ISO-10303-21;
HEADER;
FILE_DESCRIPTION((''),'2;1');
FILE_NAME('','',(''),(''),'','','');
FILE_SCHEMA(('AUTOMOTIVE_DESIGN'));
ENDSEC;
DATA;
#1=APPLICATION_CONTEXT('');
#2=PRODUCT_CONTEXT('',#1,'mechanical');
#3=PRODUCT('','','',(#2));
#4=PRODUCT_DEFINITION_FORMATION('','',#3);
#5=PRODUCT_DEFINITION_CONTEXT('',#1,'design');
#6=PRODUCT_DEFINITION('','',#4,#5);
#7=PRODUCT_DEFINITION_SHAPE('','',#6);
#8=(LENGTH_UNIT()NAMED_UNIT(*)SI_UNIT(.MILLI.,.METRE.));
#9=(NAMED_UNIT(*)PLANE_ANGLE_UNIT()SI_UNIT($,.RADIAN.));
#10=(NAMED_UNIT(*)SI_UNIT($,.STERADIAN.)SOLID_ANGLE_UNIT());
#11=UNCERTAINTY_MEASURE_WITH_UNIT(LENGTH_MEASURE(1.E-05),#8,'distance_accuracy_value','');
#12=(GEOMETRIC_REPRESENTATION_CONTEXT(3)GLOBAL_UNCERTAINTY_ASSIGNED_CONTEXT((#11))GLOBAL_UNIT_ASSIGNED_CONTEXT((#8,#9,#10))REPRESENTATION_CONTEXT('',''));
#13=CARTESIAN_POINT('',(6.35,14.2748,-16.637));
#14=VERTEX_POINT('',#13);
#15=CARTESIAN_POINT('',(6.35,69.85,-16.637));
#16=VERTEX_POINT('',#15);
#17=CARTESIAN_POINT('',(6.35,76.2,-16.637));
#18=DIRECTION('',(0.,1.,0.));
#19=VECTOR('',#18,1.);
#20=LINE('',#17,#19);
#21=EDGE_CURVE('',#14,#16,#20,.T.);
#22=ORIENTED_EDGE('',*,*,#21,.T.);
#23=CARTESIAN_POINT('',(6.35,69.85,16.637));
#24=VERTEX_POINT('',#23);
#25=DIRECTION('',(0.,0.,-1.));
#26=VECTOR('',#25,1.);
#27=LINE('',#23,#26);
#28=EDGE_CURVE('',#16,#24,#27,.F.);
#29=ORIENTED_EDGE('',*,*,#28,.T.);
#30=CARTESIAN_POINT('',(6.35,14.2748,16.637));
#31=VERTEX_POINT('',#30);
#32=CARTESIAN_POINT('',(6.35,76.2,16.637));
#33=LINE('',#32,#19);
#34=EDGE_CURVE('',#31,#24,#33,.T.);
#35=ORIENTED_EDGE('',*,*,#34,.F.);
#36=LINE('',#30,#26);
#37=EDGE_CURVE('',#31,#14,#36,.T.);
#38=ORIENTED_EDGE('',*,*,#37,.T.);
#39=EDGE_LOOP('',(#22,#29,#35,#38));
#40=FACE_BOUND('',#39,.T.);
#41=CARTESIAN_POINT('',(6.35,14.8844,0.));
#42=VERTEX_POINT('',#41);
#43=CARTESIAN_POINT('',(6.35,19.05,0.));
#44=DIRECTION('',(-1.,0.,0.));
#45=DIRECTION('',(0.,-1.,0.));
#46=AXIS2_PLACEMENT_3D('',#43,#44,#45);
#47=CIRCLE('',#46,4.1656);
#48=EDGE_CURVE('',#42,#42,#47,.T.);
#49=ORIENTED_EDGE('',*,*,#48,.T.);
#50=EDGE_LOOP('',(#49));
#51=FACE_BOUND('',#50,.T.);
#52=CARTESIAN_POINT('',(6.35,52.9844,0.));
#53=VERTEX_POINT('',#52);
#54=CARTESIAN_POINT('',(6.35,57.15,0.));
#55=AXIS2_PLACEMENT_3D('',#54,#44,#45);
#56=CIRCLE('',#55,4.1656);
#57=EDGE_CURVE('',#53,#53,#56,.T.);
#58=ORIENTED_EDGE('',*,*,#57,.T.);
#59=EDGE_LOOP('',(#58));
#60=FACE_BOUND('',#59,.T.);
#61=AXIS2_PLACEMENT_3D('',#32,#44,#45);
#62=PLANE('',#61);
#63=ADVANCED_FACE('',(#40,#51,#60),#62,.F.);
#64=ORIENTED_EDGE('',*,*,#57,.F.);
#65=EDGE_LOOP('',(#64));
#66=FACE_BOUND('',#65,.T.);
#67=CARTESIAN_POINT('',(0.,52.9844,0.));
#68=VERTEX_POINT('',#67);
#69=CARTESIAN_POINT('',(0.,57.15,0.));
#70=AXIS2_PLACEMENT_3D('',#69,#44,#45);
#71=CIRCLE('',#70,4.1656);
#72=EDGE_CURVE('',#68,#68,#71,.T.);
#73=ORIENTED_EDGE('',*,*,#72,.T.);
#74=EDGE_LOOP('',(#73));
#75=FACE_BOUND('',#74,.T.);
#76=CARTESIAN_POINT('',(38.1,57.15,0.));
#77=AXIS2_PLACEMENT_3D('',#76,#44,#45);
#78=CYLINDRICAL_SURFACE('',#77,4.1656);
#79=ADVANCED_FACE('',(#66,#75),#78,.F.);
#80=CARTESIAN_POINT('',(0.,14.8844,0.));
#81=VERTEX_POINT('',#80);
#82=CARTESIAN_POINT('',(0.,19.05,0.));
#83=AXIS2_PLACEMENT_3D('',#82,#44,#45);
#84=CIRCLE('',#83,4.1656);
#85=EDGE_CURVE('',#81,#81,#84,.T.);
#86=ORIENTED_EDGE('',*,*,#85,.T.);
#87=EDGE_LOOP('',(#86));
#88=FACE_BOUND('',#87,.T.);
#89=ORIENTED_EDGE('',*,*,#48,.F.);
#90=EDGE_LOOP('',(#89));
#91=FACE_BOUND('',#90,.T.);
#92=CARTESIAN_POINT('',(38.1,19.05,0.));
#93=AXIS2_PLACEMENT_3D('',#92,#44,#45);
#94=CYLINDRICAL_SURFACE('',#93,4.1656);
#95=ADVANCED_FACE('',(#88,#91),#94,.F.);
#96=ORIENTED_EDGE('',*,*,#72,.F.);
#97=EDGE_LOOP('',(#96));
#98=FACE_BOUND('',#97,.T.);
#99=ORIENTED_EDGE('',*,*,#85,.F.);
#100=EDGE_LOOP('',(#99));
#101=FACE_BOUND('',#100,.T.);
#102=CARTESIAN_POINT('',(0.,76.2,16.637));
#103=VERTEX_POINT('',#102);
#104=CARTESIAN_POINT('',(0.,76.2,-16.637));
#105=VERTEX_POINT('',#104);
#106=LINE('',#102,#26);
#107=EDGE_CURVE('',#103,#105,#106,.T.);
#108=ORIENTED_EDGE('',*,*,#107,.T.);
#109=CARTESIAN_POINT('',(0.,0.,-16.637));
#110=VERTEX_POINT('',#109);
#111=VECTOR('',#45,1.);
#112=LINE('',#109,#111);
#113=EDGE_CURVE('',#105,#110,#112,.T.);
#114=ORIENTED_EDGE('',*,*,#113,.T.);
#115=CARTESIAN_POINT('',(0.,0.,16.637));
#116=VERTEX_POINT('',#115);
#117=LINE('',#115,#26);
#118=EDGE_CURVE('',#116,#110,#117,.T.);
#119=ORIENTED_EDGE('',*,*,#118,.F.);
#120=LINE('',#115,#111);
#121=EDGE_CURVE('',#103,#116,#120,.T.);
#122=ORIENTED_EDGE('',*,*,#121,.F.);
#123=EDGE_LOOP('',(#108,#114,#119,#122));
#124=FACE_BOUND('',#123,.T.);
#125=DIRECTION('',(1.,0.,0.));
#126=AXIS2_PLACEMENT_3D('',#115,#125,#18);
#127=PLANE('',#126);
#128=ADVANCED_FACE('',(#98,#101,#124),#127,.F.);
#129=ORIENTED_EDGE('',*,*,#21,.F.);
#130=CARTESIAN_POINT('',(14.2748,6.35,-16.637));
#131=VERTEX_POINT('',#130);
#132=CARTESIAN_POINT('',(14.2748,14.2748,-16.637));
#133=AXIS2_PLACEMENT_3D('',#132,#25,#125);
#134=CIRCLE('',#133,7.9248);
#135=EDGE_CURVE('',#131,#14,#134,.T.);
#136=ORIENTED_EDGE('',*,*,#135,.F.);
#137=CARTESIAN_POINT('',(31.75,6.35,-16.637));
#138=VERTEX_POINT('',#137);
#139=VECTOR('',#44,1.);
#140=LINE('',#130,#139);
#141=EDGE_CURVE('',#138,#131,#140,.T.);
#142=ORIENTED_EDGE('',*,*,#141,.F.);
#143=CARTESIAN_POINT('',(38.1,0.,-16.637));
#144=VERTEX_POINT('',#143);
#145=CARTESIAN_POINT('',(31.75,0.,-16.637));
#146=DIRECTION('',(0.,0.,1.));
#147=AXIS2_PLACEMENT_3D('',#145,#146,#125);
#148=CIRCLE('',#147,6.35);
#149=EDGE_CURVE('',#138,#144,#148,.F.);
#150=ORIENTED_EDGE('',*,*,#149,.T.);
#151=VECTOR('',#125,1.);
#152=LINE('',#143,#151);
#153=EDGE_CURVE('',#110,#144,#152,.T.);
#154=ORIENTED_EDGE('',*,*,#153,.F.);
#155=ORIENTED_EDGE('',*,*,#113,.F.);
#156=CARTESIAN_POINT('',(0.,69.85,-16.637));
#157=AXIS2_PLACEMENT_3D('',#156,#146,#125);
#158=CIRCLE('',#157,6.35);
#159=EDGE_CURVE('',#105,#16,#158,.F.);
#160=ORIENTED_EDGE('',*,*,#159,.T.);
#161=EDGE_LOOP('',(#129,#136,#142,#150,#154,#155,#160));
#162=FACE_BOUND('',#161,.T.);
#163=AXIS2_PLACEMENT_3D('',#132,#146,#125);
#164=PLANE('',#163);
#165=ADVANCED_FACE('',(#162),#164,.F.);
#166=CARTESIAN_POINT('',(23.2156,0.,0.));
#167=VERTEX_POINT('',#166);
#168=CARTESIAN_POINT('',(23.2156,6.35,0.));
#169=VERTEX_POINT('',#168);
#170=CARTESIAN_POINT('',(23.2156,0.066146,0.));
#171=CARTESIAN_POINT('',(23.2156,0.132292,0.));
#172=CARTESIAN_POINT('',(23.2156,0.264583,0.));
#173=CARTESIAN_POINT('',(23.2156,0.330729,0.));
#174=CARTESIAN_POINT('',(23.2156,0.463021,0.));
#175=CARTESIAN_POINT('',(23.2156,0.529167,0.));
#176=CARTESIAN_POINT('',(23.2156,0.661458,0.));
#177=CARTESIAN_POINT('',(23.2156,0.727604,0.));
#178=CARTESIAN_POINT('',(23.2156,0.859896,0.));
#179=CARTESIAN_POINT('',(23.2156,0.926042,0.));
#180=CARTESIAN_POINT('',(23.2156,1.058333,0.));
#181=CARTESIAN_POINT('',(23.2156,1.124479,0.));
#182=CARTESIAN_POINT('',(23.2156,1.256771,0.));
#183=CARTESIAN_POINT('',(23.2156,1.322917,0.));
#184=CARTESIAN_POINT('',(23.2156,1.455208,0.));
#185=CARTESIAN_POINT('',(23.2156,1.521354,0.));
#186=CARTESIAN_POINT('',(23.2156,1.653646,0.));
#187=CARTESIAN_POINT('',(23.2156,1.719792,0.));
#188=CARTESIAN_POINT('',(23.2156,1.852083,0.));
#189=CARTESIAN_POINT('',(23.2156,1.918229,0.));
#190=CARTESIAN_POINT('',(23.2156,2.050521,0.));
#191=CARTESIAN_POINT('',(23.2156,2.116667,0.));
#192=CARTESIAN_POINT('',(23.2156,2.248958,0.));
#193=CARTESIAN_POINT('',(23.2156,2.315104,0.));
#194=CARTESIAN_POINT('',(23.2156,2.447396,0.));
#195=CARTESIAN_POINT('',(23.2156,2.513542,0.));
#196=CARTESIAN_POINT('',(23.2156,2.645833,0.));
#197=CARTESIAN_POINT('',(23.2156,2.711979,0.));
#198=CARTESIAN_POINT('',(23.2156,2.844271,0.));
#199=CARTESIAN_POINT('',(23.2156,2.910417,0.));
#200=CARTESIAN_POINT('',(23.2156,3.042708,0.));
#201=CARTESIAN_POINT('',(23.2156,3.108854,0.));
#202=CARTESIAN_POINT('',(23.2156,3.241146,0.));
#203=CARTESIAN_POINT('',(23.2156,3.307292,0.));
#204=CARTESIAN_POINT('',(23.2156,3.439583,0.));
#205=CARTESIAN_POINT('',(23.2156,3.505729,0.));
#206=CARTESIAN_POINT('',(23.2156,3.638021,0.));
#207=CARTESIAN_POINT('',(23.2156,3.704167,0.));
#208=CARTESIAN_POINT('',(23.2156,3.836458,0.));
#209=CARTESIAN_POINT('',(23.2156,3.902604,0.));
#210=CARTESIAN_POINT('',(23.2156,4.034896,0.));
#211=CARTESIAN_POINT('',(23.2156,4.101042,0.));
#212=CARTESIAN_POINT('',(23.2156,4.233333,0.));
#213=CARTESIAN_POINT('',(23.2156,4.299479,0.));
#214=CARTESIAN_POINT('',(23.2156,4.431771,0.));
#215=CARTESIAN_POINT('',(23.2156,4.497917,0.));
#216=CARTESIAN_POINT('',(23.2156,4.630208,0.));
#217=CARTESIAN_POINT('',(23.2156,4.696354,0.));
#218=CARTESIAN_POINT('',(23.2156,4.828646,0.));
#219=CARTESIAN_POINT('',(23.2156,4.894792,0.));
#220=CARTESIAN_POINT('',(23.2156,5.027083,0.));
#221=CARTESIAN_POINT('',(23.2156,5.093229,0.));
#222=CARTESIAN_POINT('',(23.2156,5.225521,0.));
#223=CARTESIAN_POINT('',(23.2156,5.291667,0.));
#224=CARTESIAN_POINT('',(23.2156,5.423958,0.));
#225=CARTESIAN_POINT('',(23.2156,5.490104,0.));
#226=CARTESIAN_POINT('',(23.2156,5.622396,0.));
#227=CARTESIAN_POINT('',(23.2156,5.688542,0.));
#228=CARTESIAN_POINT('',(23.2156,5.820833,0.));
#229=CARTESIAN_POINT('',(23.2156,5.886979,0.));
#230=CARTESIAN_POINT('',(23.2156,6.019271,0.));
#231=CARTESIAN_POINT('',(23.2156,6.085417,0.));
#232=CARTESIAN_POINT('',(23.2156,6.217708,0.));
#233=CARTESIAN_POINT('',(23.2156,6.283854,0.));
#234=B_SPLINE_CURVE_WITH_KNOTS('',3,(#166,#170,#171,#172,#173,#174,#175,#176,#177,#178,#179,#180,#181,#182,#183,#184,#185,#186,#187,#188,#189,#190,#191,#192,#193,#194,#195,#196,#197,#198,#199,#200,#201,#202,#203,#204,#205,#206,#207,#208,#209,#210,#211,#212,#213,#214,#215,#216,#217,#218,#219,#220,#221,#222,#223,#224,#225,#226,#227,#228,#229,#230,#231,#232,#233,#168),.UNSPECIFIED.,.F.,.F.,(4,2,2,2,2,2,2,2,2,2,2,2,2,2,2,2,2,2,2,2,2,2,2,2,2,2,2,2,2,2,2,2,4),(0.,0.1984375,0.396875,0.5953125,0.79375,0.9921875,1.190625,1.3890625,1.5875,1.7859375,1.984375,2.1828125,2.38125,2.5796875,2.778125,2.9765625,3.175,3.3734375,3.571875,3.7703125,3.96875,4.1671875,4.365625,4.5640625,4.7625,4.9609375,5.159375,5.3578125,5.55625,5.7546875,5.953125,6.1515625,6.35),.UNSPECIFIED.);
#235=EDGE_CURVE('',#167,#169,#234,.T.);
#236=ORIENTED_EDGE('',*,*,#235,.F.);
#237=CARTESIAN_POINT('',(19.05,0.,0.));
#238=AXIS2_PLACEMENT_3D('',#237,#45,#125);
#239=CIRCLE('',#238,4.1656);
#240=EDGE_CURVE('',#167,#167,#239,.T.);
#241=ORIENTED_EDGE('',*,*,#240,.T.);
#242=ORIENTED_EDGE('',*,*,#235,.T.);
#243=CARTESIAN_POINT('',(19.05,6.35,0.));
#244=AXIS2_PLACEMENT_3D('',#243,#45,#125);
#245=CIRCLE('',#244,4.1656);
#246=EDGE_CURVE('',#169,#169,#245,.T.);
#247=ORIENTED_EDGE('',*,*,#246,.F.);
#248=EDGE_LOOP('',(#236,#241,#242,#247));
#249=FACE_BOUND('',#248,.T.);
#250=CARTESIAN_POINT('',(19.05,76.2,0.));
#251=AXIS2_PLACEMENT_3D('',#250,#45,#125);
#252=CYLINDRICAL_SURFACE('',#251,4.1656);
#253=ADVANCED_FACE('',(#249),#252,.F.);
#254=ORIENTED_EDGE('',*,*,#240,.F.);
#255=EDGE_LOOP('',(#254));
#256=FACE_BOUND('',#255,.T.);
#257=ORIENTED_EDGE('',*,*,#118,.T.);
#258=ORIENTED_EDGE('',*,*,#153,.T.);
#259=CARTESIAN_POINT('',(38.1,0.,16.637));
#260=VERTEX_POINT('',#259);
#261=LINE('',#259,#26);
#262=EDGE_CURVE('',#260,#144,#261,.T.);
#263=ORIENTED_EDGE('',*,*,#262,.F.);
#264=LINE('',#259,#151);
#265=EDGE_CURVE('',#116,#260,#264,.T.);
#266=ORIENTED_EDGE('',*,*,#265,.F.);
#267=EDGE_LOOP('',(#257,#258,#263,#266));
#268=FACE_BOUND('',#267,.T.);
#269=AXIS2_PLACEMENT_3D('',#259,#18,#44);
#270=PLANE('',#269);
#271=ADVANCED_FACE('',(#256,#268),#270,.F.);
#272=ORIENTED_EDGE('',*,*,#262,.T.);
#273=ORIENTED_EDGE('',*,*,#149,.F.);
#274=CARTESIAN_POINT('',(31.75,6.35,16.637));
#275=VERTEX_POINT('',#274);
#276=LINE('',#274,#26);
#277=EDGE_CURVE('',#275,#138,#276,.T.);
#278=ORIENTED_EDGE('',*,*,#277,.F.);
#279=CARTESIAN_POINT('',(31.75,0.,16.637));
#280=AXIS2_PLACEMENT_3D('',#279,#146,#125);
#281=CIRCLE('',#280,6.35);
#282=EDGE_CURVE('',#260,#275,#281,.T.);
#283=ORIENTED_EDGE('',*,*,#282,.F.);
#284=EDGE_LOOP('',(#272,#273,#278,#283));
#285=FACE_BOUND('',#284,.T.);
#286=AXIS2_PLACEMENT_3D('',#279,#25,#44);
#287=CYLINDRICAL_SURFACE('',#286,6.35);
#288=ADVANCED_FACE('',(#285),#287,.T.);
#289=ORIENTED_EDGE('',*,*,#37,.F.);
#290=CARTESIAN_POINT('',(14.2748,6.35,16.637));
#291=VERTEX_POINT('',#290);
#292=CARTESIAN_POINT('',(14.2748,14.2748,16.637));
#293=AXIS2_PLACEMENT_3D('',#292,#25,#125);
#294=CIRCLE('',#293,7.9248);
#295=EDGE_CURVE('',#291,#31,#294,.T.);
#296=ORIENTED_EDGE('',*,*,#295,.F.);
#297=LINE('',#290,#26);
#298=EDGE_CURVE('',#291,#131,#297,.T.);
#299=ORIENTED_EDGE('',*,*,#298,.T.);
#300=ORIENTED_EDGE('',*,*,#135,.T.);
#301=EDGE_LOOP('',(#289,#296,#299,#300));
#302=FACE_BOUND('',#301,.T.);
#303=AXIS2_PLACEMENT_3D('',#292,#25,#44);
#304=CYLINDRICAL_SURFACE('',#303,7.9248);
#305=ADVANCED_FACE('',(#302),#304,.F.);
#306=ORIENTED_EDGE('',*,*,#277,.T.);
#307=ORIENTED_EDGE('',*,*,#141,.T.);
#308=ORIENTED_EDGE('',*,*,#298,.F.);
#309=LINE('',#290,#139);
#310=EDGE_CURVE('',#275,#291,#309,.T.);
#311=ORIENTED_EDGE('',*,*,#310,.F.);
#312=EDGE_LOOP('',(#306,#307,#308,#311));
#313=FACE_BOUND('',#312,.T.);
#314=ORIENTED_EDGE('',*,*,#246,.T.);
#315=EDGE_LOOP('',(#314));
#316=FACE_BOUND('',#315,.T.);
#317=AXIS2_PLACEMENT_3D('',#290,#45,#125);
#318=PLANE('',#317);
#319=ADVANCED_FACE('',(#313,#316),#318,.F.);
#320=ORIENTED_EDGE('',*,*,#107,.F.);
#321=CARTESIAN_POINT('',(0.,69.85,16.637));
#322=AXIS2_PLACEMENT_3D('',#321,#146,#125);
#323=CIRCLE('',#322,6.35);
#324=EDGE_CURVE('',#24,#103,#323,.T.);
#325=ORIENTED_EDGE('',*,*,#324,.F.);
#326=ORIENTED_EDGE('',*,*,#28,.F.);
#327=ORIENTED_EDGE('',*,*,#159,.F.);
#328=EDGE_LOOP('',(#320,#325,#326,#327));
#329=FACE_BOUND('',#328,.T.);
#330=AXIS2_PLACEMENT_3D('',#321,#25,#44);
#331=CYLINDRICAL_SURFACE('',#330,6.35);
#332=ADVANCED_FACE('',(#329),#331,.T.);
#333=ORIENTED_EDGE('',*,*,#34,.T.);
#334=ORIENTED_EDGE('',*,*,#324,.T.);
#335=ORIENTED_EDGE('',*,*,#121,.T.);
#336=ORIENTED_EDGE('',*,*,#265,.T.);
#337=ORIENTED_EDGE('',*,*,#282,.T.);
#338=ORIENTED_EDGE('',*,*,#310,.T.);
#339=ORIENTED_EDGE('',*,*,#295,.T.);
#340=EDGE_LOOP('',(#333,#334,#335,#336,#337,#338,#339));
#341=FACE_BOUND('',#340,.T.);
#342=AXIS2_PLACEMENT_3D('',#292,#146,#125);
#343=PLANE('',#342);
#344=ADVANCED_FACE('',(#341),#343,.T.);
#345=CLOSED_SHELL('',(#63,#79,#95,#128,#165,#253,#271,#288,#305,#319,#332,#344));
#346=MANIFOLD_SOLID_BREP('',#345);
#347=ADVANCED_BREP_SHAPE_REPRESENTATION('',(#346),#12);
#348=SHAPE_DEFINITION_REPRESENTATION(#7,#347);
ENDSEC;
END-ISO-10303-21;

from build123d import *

# Parameters (mm, degrees)
BOSS_EXTRUDE1_DEPTH = 16.637
FILLET1_R           = 6.35
SKETCH3_R           = 4.1656
CUT_EXTRUDE1_DEPTH  = 87.803454822
SKETCH4_R           = 4.1656
CUT_EXTRUDE2_DEPTH  = 87.803454822


with BuildPart() as part:
    # Sketch2 → Boss-Extrude1 (new, symmetric)
    with BuildSketch(Plane.XY):
        with BuildLine():
            Line((0, 0), (0, 76.2))
            Line((0, 76.2), (6.35, 76.2))
            Line((6.35, 76.2), (6.35, 14.2748))
            ThreePointArc((6.35, 14.2748), (8.67112018, 8.67112018), (14.2748, 6.35))
            Line((14.2748, 6.35), (38.1, 6.35))
            Line((38.1, 6.35), (38.1, 0))
            Line((38.1, 0), (0, 0))
        make_face()
    extrude(amount=BOSS_EXTRUDE1_DEPTH, both=True)

    # Fillet1
    fillet1_edges = [part.edges().sort_by_distance(p)[0] for p in [
        (38.1, 6.35, 0),
        (6.35, 76.2, 0),
    ]]
    fillet(fillet1_edges, radius=FILLET1_R - 0.0001)  # a hair under: the kernel refuses the full size

    # Sketch3 → Cut-Extrude1 (cut, through all)
    with BuildSketch(Plane.ZY):
        with Locations(Location((0, 57.15, 0), (0, 0, 270))):
            Circle(SKETCH3_R)
        with Locations(Location((0, 19.05, 0), (0, 0, 270))):
            Circle(SKETCH3_R)
    extrude(amount=-CUT_EXTRUDE1_DEPTH, mode=Mode.SUBTRACT)

    # Sketch4 → Cut-Extrude2 (cut, through all)
    with BuildSketch(Plane.XZ):
        with Locations((19.05, 0)):
            Circle(SKETCH4_R)
    extrude(amount=-CUT_EXTRUDE2_DEPTH, mode=Mode.SUBTRACT)


solid = part.part
